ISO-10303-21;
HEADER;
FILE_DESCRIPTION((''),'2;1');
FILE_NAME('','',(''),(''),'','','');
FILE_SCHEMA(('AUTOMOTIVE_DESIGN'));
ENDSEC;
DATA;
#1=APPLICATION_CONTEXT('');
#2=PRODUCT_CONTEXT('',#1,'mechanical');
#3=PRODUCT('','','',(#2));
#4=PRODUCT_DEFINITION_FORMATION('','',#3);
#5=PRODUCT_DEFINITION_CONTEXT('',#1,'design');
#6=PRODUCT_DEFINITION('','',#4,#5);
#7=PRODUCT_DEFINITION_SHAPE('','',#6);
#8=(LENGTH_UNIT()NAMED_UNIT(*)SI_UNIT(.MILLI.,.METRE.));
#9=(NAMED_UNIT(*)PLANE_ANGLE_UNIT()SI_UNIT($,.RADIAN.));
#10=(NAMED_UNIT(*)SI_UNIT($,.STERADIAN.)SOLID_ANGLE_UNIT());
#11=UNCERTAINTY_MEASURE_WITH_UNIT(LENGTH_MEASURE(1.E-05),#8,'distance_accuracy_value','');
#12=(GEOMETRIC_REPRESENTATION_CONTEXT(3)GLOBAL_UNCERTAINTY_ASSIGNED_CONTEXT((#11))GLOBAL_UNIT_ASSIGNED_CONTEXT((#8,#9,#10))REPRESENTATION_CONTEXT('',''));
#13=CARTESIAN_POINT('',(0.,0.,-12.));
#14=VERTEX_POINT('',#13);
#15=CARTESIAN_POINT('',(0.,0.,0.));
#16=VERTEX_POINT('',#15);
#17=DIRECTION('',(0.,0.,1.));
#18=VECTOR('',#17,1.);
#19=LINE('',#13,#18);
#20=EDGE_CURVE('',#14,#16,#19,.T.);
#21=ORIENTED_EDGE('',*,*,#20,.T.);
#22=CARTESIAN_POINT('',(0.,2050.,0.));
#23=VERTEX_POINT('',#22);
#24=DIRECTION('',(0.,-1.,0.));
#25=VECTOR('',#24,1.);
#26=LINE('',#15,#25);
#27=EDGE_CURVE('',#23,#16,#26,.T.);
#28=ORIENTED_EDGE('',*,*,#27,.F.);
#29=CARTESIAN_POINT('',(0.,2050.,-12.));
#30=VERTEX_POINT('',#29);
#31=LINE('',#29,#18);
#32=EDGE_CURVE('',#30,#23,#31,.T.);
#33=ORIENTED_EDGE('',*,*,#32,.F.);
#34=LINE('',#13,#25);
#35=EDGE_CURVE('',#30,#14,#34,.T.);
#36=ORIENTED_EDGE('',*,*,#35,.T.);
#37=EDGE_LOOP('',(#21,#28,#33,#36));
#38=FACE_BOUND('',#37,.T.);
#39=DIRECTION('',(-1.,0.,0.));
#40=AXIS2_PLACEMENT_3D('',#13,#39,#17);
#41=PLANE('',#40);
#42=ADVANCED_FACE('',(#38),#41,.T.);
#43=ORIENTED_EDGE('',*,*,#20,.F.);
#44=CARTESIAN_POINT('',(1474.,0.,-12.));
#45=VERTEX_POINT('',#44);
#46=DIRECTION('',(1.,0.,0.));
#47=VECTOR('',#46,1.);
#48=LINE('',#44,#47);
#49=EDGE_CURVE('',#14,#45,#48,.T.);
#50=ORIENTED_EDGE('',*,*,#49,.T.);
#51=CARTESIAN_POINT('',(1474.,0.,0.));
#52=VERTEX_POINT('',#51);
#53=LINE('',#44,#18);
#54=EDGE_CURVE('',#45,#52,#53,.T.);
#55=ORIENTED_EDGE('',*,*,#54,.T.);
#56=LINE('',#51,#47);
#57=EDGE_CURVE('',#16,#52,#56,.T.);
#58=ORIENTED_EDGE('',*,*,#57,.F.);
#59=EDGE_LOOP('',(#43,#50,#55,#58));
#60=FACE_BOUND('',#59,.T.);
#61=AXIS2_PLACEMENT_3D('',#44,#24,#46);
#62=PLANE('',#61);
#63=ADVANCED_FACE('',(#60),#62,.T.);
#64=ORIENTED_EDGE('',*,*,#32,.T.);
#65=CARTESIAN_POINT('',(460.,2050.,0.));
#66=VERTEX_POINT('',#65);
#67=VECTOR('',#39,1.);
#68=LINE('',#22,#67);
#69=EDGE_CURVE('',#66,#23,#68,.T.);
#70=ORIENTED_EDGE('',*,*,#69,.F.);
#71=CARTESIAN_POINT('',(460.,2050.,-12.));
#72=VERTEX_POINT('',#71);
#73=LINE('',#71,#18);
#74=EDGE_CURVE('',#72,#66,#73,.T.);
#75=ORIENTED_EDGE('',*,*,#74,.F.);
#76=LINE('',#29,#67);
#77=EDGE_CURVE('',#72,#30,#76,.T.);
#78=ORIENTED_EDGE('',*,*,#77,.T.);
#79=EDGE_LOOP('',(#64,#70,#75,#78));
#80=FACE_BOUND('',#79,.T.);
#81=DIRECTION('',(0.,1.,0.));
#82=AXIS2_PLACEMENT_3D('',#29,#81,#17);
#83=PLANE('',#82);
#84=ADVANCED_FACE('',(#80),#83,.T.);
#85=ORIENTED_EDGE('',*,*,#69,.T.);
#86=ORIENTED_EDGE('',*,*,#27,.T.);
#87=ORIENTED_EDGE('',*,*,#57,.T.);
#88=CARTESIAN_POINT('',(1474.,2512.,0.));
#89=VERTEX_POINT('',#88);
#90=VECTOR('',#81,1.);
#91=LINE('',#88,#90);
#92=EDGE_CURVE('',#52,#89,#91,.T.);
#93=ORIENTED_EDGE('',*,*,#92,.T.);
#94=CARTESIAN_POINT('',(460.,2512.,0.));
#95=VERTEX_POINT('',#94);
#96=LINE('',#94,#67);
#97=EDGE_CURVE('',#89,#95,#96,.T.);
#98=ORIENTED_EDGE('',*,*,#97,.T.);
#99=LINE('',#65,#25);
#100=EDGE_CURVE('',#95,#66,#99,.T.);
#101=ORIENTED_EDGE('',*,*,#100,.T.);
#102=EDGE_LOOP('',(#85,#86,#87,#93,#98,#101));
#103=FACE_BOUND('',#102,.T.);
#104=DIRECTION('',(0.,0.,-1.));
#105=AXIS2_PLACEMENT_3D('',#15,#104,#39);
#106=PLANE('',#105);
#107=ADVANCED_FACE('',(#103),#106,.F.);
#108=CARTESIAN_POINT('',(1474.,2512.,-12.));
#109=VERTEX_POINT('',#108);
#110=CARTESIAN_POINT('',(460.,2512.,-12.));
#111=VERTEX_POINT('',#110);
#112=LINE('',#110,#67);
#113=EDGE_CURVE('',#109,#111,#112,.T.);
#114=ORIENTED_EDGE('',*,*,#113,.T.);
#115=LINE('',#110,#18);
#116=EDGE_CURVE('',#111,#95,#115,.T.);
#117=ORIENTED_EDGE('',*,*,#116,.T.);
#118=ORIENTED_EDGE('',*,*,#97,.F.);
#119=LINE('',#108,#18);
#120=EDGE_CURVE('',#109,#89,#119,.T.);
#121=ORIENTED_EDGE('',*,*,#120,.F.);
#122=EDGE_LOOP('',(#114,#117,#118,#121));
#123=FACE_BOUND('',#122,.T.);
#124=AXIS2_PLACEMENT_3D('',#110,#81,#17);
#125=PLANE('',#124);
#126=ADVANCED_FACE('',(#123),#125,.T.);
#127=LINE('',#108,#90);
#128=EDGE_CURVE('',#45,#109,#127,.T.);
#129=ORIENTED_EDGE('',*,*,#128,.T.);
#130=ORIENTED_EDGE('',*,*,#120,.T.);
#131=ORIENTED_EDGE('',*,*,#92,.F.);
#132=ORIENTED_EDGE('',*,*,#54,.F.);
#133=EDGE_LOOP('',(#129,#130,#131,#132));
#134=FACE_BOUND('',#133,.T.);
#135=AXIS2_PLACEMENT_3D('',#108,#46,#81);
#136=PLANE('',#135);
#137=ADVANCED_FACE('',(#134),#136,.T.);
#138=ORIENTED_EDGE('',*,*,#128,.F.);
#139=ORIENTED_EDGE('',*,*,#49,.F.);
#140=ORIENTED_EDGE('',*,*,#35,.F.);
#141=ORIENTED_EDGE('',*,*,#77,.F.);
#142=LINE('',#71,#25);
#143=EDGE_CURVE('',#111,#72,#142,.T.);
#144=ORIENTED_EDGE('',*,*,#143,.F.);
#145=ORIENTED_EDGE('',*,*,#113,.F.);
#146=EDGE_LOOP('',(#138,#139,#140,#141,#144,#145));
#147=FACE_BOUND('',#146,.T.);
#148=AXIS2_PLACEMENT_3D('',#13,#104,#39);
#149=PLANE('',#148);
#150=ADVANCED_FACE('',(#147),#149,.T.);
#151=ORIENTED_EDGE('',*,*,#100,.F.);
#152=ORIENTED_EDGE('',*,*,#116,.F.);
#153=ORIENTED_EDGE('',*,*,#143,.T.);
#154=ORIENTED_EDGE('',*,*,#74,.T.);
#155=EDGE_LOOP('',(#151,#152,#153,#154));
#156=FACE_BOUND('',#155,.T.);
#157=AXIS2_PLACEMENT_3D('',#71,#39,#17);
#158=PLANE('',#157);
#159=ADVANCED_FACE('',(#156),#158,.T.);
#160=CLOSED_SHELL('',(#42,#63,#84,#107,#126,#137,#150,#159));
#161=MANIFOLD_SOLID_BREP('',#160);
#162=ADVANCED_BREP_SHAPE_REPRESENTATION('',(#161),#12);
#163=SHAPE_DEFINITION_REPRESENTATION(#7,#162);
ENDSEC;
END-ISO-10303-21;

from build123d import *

# Parameters (mm, degrees)
TABAN_FLAN_1_DEPTH = 12


# Sheet-metal steps are written as plain solids
with BuildPart() as part:
    # Çizim1 → Taban-Flanş1 (new body)
    with BuildSketch(Plane.XY):
        Polygon((0, 0), (0, 2050), (460, 2050), (460, 2512), (1474, 2512), (1474, 0), align=None)
    extrude(amount=-TABAN_FLAN_1_DEPTH)


solid = part.part
